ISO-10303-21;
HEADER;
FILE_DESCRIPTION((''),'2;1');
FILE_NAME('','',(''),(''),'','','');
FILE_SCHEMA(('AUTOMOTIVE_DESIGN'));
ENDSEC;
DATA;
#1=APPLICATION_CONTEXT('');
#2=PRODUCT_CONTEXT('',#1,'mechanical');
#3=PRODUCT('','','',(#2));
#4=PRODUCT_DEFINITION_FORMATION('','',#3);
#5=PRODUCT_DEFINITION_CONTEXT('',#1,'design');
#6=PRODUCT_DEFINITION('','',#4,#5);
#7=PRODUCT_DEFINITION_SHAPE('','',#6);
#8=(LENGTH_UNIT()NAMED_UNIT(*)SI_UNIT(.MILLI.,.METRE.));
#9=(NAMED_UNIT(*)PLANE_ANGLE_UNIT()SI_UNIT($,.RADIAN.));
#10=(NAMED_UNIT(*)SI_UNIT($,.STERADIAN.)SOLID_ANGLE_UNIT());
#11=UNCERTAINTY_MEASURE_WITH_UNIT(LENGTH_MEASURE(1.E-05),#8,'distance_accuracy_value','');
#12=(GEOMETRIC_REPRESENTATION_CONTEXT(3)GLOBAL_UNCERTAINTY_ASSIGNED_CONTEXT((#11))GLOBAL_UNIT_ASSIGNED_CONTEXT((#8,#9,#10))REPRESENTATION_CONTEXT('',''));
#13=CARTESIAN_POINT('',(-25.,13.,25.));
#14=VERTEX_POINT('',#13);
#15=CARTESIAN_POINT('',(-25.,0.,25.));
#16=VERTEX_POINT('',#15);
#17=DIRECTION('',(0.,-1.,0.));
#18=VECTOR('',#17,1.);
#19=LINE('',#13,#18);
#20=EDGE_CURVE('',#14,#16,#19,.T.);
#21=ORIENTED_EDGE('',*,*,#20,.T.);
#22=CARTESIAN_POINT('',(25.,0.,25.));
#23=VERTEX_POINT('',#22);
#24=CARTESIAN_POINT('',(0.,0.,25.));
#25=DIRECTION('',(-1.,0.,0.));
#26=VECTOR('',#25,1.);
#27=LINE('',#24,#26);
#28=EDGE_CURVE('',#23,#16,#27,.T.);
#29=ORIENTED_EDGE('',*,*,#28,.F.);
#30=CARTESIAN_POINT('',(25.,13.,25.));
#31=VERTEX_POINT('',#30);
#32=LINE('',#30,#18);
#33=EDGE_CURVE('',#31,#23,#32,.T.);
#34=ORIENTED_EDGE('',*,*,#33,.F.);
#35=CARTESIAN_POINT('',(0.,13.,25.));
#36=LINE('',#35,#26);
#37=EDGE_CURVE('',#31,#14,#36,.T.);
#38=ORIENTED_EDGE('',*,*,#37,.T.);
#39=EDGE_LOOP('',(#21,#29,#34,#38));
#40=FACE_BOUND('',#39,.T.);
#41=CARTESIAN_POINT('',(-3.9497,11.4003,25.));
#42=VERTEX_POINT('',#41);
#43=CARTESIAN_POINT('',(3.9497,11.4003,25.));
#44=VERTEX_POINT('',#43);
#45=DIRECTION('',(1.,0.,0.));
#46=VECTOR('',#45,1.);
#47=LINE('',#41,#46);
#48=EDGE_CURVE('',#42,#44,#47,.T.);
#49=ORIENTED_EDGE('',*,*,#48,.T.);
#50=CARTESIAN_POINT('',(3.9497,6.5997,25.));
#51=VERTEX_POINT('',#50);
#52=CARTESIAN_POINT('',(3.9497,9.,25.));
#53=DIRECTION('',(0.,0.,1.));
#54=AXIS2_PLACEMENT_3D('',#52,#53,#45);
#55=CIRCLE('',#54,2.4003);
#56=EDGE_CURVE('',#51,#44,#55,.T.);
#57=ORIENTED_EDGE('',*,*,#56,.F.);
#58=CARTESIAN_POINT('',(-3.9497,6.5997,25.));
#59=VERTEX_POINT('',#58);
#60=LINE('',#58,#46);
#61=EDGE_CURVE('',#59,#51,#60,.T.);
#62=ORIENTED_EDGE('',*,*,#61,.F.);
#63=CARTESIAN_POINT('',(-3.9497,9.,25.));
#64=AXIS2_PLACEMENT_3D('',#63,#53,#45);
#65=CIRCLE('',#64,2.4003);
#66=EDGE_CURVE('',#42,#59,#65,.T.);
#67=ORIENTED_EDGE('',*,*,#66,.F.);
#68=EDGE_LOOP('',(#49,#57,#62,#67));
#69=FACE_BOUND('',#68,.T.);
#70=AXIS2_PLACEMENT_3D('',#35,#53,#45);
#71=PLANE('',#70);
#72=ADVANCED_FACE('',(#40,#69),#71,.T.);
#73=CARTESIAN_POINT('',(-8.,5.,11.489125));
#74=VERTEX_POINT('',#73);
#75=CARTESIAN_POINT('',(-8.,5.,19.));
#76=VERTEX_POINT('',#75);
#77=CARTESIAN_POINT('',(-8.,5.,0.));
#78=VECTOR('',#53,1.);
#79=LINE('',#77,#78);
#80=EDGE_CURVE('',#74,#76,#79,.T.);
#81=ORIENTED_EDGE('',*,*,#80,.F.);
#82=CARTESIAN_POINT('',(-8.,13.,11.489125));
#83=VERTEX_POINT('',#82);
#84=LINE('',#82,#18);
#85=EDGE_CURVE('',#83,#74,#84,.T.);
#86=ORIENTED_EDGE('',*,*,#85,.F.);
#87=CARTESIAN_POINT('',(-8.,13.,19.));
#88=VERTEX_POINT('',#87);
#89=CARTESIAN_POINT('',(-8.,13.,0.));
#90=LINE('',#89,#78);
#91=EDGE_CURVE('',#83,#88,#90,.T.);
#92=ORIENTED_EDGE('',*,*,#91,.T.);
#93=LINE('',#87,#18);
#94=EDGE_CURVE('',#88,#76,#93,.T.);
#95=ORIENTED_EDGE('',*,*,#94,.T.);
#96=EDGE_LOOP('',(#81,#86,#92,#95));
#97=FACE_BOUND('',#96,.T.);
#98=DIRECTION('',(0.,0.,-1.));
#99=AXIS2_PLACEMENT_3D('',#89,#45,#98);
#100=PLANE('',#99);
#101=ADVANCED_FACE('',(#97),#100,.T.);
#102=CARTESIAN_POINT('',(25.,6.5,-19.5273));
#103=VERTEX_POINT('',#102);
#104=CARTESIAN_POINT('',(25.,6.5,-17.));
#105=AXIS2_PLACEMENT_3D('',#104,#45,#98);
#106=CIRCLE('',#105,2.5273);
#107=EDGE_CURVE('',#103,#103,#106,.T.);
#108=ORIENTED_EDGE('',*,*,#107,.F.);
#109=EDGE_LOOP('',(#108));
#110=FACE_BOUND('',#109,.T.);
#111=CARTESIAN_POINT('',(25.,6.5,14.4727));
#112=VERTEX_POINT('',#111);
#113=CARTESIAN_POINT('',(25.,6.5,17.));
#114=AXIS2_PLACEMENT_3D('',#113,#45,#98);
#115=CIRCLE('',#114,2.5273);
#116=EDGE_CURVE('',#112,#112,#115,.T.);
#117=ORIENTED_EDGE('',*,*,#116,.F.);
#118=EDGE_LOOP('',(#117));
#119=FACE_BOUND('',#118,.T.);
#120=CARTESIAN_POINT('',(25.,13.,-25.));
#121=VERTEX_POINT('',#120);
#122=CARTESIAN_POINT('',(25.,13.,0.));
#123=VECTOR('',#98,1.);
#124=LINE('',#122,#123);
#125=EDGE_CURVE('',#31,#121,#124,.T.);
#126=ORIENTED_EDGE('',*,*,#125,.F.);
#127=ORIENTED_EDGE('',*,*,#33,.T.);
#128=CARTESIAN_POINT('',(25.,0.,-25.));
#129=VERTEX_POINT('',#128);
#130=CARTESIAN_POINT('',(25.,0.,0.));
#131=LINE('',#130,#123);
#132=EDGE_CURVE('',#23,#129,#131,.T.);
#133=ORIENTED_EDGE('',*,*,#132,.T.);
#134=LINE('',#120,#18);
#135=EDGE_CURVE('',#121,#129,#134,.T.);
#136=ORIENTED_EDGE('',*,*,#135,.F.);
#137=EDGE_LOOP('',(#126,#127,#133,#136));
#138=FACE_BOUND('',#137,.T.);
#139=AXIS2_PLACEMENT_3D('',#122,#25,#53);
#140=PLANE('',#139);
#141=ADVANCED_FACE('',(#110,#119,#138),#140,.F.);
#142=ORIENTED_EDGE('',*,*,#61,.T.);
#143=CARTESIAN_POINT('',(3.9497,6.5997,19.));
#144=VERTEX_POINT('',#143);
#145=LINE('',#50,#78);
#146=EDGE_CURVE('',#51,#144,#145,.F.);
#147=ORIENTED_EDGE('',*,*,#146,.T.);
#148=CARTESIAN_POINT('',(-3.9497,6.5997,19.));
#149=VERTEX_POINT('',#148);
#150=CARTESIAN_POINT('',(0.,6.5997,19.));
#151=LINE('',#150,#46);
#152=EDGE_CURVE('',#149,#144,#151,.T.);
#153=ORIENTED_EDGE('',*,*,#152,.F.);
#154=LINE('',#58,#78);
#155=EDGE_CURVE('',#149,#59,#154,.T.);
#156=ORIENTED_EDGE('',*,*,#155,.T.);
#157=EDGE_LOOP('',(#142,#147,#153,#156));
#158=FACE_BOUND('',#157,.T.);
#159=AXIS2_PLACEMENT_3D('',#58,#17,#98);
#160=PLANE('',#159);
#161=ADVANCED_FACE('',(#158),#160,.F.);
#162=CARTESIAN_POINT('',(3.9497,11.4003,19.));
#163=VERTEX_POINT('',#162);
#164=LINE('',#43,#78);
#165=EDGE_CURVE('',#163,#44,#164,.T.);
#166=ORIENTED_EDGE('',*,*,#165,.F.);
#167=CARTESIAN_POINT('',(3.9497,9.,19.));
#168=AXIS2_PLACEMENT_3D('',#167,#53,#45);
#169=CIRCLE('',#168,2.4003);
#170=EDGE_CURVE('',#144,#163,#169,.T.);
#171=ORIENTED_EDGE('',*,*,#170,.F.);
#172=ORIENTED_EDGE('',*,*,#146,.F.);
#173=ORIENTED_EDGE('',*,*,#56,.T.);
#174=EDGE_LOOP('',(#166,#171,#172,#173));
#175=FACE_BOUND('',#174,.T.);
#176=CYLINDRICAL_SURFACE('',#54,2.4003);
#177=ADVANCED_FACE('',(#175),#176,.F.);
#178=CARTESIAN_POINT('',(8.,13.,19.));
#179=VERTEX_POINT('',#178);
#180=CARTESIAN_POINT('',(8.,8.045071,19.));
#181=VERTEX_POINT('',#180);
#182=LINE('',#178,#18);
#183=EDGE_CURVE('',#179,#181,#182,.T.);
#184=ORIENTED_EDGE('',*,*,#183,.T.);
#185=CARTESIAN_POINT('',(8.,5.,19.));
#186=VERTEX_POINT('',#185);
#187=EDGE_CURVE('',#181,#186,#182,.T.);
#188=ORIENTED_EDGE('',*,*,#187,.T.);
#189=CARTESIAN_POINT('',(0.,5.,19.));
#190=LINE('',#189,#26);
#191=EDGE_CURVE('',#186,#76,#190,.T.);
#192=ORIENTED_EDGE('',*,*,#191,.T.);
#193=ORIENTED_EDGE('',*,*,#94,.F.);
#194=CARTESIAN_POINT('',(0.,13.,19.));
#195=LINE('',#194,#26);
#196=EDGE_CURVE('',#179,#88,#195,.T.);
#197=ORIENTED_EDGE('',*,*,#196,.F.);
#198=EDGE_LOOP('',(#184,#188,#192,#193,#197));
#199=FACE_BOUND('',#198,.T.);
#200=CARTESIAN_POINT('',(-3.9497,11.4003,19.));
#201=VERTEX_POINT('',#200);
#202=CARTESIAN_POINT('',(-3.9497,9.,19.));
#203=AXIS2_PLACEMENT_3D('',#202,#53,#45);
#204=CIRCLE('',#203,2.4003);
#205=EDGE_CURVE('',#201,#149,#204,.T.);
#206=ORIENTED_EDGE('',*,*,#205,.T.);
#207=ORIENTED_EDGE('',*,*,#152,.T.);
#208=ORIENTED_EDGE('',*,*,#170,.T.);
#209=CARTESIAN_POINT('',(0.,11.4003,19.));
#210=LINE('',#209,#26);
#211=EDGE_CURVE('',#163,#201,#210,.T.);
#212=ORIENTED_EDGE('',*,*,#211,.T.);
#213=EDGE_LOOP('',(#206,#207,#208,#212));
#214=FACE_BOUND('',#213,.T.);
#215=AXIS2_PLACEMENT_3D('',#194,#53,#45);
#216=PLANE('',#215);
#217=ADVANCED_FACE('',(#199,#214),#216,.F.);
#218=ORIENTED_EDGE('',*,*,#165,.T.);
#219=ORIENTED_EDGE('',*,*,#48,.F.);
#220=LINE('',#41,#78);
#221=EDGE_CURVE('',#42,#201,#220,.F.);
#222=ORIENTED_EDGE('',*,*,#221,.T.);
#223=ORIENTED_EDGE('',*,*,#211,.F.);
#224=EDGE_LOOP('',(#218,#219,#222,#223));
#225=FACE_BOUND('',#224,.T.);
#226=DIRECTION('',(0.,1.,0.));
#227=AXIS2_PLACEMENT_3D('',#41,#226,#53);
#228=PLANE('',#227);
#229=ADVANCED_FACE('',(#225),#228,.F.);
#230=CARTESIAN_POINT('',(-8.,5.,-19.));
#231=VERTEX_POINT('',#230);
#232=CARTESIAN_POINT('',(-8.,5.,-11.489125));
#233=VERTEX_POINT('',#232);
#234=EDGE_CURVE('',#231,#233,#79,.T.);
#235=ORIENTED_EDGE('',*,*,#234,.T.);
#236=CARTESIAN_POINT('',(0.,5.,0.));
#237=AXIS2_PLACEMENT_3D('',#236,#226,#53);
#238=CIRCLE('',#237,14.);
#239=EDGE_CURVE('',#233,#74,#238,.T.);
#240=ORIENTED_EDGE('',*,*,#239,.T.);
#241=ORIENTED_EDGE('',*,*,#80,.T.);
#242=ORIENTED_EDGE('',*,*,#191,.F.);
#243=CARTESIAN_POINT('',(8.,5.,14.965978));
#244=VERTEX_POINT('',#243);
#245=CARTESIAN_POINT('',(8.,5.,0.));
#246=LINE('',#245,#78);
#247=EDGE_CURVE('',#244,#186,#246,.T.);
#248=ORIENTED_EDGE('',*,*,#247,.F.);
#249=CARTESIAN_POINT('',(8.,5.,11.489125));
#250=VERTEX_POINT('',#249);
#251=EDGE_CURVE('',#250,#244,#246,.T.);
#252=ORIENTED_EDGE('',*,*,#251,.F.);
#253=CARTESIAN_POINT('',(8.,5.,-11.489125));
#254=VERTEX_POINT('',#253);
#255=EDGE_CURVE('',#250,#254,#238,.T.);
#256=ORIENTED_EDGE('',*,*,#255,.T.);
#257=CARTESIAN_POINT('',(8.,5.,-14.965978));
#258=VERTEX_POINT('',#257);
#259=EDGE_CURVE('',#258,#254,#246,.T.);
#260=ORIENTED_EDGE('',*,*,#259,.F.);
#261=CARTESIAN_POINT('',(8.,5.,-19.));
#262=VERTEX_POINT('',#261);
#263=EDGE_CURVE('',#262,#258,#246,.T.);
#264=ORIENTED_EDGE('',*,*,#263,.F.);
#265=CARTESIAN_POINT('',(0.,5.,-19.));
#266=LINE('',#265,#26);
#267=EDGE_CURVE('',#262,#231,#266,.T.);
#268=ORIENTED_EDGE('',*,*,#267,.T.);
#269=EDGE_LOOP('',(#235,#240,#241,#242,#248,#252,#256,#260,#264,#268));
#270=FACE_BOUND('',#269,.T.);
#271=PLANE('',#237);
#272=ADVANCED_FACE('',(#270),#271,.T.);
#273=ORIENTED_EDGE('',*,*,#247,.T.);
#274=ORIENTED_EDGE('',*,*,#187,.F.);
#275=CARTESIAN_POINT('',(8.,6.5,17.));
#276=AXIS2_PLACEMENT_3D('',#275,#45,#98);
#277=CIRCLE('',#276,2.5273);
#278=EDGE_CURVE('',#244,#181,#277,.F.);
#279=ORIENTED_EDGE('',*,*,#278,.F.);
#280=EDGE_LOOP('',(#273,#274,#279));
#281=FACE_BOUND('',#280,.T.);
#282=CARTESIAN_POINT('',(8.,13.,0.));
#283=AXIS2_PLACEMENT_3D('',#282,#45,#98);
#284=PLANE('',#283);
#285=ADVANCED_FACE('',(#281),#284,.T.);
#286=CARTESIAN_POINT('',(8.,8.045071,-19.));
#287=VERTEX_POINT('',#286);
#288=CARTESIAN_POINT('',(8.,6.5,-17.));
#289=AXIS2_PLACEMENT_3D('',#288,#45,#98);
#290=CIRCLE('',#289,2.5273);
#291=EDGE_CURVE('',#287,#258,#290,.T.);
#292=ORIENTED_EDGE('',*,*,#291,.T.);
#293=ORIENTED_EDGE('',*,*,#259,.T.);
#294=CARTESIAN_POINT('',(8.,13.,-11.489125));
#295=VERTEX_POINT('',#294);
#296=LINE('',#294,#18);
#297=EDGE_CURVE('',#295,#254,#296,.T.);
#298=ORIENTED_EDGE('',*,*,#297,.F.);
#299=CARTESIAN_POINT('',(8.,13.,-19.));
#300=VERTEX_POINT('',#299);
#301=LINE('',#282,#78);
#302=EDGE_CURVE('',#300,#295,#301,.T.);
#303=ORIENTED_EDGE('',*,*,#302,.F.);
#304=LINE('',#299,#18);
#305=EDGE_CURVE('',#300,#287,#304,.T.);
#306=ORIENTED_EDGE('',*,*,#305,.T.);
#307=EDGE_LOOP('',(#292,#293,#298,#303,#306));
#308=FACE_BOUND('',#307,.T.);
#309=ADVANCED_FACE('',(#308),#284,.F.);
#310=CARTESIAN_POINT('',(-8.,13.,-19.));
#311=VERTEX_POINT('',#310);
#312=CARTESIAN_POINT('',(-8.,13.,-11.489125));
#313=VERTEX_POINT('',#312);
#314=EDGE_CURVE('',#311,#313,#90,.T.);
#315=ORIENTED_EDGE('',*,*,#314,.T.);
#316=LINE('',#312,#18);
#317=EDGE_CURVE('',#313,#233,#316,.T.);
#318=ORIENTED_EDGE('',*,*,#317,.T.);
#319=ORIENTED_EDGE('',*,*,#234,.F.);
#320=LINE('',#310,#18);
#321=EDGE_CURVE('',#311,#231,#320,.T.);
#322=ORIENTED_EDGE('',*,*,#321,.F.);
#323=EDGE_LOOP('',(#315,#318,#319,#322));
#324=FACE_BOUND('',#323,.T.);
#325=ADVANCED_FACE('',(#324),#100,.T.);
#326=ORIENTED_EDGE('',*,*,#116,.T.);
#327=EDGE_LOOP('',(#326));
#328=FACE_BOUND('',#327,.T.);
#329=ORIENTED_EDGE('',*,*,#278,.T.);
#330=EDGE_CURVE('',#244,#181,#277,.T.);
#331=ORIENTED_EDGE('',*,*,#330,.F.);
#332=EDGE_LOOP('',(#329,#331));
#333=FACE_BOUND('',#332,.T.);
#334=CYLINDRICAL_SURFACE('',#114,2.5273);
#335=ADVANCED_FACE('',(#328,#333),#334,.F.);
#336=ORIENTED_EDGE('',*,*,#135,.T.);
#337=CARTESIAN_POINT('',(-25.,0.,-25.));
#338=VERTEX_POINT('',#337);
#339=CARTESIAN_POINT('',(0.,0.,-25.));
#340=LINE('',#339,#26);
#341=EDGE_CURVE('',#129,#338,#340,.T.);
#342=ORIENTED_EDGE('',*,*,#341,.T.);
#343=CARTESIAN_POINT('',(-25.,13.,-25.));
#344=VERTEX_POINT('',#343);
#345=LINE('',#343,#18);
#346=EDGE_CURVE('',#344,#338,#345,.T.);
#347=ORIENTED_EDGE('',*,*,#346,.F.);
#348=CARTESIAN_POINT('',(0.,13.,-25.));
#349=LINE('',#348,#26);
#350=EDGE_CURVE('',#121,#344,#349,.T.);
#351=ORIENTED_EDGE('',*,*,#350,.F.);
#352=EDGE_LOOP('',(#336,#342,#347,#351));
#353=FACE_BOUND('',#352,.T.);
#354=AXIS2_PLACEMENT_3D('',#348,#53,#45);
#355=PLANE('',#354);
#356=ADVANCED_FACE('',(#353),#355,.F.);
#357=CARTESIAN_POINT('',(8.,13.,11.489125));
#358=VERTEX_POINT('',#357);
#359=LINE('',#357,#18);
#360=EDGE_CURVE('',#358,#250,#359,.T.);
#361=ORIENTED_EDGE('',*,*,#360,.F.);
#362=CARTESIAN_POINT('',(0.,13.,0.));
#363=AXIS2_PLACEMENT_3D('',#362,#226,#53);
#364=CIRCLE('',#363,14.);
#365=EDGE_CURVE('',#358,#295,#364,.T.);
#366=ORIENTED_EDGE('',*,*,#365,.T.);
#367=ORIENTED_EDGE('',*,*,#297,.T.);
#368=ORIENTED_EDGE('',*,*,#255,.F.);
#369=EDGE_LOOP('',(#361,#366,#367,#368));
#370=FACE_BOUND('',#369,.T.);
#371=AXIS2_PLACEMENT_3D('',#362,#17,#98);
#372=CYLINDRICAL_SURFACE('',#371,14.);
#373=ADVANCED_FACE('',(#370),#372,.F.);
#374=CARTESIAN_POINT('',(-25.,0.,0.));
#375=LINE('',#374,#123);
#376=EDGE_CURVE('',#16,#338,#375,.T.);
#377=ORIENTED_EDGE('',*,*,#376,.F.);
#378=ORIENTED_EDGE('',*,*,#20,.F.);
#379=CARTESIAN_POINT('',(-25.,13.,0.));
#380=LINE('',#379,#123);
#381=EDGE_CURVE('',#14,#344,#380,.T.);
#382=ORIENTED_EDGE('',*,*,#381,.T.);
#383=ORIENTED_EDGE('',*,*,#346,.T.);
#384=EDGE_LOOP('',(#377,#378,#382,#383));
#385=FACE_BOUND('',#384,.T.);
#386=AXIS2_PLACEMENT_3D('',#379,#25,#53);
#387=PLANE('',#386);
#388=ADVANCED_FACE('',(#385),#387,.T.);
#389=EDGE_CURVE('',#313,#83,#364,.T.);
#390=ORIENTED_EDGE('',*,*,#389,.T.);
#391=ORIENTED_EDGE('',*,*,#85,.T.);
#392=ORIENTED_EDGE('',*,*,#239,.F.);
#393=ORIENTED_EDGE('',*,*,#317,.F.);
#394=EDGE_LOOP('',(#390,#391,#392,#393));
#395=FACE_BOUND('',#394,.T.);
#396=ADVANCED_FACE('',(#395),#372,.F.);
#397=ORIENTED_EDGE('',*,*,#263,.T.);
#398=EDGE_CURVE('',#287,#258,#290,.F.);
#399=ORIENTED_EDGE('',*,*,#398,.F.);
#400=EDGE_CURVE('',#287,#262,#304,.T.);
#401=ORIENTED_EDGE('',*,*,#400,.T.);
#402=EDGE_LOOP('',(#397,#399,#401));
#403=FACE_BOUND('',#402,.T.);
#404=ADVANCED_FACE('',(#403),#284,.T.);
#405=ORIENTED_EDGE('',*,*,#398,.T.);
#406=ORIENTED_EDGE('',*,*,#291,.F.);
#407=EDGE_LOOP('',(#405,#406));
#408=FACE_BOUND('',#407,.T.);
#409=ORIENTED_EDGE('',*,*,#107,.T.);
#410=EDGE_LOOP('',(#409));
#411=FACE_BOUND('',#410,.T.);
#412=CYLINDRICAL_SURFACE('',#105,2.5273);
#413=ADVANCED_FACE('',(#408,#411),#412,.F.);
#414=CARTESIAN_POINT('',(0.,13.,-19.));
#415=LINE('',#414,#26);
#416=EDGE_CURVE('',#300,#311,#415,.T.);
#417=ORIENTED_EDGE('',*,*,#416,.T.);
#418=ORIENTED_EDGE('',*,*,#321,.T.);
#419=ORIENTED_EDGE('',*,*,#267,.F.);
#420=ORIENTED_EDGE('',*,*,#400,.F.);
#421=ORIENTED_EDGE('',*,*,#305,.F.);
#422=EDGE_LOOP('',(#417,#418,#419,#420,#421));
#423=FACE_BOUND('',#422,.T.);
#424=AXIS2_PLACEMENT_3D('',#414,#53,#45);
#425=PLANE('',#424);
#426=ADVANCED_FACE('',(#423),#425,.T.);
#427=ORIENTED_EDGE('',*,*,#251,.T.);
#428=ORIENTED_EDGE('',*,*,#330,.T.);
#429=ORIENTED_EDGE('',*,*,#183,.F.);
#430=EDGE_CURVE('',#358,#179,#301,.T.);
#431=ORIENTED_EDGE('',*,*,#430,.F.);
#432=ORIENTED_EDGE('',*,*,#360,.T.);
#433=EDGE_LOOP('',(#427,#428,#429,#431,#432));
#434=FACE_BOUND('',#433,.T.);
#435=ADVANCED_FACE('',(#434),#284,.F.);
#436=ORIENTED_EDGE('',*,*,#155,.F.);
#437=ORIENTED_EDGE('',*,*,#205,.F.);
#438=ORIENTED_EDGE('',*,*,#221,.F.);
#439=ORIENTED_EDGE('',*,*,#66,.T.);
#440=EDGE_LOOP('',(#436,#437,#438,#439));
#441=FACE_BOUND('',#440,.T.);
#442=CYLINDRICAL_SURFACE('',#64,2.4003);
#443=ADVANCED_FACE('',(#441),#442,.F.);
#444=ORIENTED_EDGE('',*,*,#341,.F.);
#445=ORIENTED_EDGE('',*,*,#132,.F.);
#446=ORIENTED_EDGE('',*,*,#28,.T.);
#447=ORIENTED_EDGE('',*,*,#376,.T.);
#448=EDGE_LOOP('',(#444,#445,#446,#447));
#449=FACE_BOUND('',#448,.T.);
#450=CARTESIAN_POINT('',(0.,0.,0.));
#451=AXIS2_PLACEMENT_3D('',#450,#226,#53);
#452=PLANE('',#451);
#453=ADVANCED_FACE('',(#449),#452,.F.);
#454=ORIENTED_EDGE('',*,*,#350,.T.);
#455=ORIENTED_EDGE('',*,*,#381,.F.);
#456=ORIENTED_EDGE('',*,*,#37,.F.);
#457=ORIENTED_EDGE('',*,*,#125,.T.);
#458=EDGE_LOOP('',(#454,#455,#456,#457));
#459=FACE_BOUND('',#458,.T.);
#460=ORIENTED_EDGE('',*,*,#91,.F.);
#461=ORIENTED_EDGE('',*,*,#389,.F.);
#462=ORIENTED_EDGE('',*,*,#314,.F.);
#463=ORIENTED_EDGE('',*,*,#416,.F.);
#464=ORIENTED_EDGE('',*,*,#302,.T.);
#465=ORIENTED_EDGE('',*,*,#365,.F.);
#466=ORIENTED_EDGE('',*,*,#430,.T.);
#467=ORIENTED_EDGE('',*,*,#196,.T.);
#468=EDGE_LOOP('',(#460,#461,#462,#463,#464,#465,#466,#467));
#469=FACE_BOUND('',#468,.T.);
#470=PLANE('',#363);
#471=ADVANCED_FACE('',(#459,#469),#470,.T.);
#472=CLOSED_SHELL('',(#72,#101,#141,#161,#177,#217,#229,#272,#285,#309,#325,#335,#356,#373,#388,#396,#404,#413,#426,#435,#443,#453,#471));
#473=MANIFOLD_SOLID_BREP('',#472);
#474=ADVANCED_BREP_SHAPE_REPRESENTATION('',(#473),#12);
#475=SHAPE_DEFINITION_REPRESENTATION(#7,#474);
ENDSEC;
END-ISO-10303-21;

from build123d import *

# Parameters (mm, degrees)
SKETCH1_W                       = 50
SKETCH1_H                       = 50
BOSS_EXTRUDE1_DEPTH             = 13
BOSS_EXTRUDE2_DEPTH             = 5
F_8_0_199_DIAMETER_HOLE1_D      = 5.0546
F_8_0_199_DIAMETER_HOLE1_DEPTH  = 17
F_12_START                      = 19
F_12_0_189_DIAMETER_SLOT1_DEPTH = 6


# Read off the part's stored shape, not the designer's step: #12 (0.189) Diameter Slot1
with BuildPart() as part:
    # Sketch1 → Boss-Extrude1 (new body)
    with BuildSketch(Plane(origin=(0, 0, 0), x_dir=(1, 0, 0), z_dir=(0, 1, 0))):
        Rectangle(SKETCH1_W, SKETCH1_H)
        with BuildLine():
            Line((-8, 19), (8, 19))
            Line((8, 19), (8, 11.489125293))
            ThreePointArc((8, 11.489125293), (12.409673646, 6.480740698), (14, 0))
            ThreePointArc((14, 0), (12.409673646, -6.480740698), (8, -11.489125293))
            Line((8, -11.489125293), (8, -19))
            Line((8, -19), (-8, -19))
            Line((-8, -19), (-8, -11.489125293))
            ThreePointArc((-8, -11.489125293), (-14, 0), (-8, 11.489125293))
            Line((-8, 11.489125293), (-8, 19))
        make_face(mode=Mode.SUBTRACT)
    extrude(amount=BOSS_EXTRUDE1_DEPTH)

    # Sketch1<3> → Boss-Extrude2 (add)
    with BuildSketch(Plane(origin=(0, 0, 0), x_dir=(1, 0, 0), z_dir=(0, 1, 0))):
        with BuildLine():
            Line((8, -19), (8, -11.489125293))
            ThreePointArc((8, -11.489125293), (0, -14), (-8, -11.489125293))
            Line((-8, -11.489125293), (-8, -19))
            Line((-8, -19), (8, -19))
        make_face()
        with BuildLine():
            Line((8, -11.489125293), (8, 11.489125293))
            ThreePointArc((8, 11.489125293), (0, 14), (-8, 11.489125293))
            Line((-8, 11.489125293), (-8, -11.489125293))
            ThreePointArc((-8, -11.489125293), (0, -14), (8, -11.489125293))
        make_face()
        with BuildLine():
            Line((-8, -11.489125293), (-8, 11.489125293))
            ThreePointArc((-8, 11.489125293), (-14, 0), (-8, -11.489125293))
        make_face()
        with BuildLine():
            Line((8, 11.489125293), (8, 19))
            Line((8, 19), (-8, 19))
            Line((-8, 19), (-8, 11.489125293))
            ThreePointArc((-8, 11.489125293), (0, 14), (8, 11.489125293))
        make_face()
        with BuildLine():
            ThreePointArc((14, 0), (12.409673646, 6.480740698), (8, 11.489125293))
            Line((8, 11.489125293), (8, -11.489125293))
            ThreePointArc((8, -11.489125293), (12.409673646, -6.480740698), (14, 0))
        make_face()
    extrude(amount=BOSS_EXTRUDE2_DEPTH)

    # #8 (0.199) Diameter Hole1
    with Locations(Plane(origin=(25, 0, 0), x_dir=(0, 0, -1), z_dir=(1, 0, 0))):
        with Locations((-17, 6.5), (17, 6.5)):
            Hole(F_8_0_199_DIAMETER_HOLE1_D / 2, depth=F_8_0_199_DIAMETER_HOLE1_DEPTH)

    # #12 (0.189) Diameter Slot1 outline → #12 (0.189) Diameter Slot1 (cut)
    with BuildSketch(Plane.XY.offset(F_12_START)):
        with BuildLine():
            Line((-3.9497, 6.5997), (3.9497, 6.5997))
            ThreePointArc((3.9497, 6.5997), (6.35, 9), (3.9497, 11.4003))
            Line((3.9497, 11.4003), (-3.9497, 11.4003))
            ThreePointArc((-3.9497, 11.4003), (-6.35, 9), (-3.9497, 6.5997))
        make_face()
    extrude(amount=F_12_0_189_DIAMETER_SLOT1_DEPTH, mode=Mode.SUBTRACT)


solid = part.part
